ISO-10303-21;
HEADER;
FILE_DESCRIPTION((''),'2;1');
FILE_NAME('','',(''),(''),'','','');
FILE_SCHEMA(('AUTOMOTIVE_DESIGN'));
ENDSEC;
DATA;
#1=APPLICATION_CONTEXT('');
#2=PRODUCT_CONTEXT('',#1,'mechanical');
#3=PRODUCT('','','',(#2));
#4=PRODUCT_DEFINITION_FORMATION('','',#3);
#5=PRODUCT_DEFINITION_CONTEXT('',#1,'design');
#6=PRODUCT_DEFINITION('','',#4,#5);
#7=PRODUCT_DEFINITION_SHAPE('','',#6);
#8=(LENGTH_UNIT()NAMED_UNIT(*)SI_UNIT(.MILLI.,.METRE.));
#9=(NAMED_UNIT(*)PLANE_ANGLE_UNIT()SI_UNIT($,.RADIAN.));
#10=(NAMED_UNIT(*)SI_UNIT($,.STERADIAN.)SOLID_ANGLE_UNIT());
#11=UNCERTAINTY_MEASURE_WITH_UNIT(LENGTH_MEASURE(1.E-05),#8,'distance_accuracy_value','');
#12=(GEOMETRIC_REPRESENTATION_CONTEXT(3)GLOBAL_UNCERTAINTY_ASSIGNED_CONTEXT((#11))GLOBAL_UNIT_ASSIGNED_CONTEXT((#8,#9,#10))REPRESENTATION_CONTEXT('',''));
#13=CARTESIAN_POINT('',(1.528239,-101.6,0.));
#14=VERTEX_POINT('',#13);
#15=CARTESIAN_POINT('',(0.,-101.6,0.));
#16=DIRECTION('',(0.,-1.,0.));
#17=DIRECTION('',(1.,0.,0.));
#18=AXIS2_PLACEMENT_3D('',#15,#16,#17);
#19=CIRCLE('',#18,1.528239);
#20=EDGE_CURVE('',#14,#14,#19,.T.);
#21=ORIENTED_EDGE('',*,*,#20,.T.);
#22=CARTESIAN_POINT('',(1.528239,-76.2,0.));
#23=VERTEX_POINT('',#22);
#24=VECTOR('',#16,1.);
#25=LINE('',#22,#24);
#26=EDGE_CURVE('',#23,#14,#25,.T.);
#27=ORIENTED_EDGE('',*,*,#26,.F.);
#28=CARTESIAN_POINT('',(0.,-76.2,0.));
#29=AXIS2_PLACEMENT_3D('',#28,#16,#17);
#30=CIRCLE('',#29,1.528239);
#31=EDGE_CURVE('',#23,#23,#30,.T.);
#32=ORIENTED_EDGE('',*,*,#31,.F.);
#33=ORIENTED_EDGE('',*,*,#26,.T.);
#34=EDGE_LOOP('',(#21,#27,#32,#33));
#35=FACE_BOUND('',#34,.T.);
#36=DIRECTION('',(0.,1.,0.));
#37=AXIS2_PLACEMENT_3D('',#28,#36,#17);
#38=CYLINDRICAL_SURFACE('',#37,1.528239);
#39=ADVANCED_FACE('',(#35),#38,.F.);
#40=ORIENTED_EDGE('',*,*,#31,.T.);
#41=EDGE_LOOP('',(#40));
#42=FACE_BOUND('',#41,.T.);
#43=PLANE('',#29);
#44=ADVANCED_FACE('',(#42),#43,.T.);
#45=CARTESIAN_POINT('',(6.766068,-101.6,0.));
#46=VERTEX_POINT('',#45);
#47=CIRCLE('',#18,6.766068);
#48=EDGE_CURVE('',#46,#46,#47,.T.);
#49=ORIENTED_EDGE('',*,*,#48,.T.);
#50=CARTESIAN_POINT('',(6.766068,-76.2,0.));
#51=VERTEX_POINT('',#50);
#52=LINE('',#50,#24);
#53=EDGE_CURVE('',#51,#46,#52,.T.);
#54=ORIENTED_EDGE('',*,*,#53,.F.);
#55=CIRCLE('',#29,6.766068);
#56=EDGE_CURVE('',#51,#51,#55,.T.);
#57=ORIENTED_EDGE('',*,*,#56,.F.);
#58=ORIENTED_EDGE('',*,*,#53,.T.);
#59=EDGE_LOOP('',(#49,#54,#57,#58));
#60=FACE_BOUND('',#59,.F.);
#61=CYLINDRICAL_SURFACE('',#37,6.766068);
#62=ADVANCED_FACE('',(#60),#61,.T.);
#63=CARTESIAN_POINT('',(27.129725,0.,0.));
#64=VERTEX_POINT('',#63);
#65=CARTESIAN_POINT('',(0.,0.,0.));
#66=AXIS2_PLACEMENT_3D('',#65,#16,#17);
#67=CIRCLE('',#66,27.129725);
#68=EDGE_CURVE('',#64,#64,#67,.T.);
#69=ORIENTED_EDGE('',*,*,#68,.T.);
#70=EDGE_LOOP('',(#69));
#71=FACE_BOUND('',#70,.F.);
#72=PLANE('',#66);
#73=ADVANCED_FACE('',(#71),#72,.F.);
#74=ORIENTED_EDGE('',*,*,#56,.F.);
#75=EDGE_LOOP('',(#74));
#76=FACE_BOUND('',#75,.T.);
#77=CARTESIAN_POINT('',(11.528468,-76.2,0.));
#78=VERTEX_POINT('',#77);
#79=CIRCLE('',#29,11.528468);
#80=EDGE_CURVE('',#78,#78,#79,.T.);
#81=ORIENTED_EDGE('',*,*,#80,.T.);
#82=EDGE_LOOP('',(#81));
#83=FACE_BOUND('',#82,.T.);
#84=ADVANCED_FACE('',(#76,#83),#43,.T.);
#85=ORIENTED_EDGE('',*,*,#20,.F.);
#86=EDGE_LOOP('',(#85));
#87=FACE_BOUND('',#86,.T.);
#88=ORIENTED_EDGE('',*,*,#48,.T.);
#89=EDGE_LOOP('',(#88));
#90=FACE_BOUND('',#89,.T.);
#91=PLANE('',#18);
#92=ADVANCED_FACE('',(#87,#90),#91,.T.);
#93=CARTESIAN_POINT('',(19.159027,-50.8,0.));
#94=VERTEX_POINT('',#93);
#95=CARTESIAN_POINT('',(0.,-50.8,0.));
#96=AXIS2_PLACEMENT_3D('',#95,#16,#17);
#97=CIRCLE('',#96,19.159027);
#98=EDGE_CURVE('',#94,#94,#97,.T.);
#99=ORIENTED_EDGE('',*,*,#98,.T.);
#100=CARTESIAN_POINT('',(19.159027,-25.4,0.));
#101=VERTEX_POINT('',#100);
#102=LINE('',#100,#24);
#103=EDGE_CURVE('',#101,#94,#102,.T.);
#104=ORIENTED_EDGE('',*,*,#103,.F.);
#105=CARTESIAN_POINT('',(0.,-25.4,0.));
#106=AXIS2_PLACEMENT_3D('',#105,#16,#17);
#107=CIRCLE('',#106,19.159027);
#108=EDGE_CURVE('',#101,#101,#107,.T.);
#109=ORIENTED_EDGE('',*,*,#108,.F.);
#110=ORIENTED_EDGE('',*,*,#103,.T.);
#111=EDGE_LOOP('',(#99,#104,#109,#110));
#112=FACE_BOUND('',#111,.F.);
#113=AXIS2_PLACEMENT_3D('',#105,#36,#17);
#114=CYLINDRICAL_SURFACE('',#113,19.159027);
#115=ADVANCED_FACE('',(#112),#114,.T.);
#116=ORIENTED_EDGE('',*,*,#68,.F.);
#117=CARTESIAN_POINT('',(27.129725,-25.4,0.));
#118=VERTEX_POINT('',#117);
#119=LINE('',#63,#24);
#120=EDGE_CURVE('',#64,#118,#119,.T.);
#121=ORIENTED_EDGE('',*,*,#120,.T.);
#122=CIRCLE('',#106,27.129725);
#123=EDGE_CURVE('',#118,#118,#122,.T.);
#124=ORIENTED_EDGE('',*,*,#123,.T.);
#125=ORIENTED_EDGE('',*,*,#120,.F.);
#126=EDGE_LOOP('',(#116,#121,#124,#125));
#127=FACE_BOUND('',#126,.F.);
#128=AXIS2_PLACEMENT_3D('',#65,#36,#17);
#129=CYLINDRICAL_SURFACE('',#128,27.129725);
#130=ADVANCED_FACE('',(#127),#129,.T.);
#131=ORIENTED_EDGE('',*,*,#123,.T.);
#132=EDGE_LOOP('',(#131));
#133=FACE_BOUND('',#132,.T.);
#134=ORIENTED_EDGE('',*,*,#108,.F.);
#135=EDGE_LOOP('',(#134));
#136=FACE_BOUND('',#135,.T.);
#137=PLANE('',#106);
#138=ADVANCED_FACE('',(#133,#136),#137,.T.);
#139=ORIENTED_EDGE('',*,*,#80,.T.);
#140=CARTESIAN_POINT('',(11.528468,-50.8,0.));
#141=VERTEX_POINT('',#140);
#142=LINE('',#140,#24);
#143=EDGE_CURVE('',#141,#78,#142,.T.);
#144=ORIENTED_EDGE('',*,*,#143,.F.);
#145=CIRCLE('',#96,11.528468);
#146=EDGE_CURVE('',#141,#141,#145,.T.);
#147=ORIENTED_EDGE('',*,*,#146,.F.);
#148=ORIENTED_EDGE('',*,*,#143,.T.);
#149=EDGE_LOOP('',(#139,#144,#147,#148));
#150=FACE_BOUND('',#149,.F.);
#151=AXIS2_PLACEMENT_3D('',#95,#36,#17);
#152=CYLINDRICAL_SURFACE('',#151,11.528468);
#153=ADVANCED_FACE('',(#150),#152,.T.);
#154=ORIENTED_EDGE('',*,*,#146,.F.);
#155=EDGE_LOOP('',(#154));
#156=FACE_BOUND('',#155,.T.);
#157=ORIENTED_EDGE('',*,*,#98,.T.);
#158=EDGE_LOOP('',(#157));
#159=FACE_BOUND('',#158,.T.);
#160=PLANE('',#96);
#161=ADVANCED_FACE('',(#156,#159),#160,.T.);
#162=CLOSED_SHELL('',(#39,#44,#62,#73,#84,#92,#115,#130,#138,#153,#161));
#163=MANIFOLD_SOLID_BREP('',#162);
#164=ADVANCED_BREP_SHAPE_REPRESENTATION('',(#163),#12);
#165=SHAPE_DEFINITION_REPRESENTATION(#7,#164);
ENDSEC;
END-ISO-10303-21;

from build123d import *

# Parameters (mm, degrees)
F0_R     = 27.1297247918
F1_DEPTH = 25.4
F2_R     = 19.1590274532
F3_DEPTH = 25.4
F4_R     = 11.5284679065
F5_DEPTH = 25.4
F6_R     = 6.766068174
F6_R_2   = 1.5282390362
F7_DEPTH = 25.4


# Not quite as in the source:
# - the program builds the solid bodies; features that only make, move or delete a surface that nothing else refers to are left out


with BuildPart() as f1:
    # F0 (on Front) → F1 (new body)
    with BuildSketch(Plane.XZ):
        Circle(F0_R)
    extrude(amount=F1_DEPTH)

    # F2 (on face) → F3 (join)
    with BuildSketch(Plane.XZ.offset(25.4)):
        Circle(F2_R)
    extrude(amount=F3_DEPTH)

    # F4 (on face) → F5 (join)
    with BuildSketch(Plane.XZ.offset(50.8)):
        Circle(F4_R)
    extrude(amount=F5_DEPTH)

    # F6 (on face) → F7 (join)
    with BuildSketch(Plane.XZ.offset(76.2)):
        Circle(F6_R)
        Circle(F6_R_2, mode=Mode.SUBTRACT)
    extrude(amount=F7_DEPTH)


solid = f1.part
